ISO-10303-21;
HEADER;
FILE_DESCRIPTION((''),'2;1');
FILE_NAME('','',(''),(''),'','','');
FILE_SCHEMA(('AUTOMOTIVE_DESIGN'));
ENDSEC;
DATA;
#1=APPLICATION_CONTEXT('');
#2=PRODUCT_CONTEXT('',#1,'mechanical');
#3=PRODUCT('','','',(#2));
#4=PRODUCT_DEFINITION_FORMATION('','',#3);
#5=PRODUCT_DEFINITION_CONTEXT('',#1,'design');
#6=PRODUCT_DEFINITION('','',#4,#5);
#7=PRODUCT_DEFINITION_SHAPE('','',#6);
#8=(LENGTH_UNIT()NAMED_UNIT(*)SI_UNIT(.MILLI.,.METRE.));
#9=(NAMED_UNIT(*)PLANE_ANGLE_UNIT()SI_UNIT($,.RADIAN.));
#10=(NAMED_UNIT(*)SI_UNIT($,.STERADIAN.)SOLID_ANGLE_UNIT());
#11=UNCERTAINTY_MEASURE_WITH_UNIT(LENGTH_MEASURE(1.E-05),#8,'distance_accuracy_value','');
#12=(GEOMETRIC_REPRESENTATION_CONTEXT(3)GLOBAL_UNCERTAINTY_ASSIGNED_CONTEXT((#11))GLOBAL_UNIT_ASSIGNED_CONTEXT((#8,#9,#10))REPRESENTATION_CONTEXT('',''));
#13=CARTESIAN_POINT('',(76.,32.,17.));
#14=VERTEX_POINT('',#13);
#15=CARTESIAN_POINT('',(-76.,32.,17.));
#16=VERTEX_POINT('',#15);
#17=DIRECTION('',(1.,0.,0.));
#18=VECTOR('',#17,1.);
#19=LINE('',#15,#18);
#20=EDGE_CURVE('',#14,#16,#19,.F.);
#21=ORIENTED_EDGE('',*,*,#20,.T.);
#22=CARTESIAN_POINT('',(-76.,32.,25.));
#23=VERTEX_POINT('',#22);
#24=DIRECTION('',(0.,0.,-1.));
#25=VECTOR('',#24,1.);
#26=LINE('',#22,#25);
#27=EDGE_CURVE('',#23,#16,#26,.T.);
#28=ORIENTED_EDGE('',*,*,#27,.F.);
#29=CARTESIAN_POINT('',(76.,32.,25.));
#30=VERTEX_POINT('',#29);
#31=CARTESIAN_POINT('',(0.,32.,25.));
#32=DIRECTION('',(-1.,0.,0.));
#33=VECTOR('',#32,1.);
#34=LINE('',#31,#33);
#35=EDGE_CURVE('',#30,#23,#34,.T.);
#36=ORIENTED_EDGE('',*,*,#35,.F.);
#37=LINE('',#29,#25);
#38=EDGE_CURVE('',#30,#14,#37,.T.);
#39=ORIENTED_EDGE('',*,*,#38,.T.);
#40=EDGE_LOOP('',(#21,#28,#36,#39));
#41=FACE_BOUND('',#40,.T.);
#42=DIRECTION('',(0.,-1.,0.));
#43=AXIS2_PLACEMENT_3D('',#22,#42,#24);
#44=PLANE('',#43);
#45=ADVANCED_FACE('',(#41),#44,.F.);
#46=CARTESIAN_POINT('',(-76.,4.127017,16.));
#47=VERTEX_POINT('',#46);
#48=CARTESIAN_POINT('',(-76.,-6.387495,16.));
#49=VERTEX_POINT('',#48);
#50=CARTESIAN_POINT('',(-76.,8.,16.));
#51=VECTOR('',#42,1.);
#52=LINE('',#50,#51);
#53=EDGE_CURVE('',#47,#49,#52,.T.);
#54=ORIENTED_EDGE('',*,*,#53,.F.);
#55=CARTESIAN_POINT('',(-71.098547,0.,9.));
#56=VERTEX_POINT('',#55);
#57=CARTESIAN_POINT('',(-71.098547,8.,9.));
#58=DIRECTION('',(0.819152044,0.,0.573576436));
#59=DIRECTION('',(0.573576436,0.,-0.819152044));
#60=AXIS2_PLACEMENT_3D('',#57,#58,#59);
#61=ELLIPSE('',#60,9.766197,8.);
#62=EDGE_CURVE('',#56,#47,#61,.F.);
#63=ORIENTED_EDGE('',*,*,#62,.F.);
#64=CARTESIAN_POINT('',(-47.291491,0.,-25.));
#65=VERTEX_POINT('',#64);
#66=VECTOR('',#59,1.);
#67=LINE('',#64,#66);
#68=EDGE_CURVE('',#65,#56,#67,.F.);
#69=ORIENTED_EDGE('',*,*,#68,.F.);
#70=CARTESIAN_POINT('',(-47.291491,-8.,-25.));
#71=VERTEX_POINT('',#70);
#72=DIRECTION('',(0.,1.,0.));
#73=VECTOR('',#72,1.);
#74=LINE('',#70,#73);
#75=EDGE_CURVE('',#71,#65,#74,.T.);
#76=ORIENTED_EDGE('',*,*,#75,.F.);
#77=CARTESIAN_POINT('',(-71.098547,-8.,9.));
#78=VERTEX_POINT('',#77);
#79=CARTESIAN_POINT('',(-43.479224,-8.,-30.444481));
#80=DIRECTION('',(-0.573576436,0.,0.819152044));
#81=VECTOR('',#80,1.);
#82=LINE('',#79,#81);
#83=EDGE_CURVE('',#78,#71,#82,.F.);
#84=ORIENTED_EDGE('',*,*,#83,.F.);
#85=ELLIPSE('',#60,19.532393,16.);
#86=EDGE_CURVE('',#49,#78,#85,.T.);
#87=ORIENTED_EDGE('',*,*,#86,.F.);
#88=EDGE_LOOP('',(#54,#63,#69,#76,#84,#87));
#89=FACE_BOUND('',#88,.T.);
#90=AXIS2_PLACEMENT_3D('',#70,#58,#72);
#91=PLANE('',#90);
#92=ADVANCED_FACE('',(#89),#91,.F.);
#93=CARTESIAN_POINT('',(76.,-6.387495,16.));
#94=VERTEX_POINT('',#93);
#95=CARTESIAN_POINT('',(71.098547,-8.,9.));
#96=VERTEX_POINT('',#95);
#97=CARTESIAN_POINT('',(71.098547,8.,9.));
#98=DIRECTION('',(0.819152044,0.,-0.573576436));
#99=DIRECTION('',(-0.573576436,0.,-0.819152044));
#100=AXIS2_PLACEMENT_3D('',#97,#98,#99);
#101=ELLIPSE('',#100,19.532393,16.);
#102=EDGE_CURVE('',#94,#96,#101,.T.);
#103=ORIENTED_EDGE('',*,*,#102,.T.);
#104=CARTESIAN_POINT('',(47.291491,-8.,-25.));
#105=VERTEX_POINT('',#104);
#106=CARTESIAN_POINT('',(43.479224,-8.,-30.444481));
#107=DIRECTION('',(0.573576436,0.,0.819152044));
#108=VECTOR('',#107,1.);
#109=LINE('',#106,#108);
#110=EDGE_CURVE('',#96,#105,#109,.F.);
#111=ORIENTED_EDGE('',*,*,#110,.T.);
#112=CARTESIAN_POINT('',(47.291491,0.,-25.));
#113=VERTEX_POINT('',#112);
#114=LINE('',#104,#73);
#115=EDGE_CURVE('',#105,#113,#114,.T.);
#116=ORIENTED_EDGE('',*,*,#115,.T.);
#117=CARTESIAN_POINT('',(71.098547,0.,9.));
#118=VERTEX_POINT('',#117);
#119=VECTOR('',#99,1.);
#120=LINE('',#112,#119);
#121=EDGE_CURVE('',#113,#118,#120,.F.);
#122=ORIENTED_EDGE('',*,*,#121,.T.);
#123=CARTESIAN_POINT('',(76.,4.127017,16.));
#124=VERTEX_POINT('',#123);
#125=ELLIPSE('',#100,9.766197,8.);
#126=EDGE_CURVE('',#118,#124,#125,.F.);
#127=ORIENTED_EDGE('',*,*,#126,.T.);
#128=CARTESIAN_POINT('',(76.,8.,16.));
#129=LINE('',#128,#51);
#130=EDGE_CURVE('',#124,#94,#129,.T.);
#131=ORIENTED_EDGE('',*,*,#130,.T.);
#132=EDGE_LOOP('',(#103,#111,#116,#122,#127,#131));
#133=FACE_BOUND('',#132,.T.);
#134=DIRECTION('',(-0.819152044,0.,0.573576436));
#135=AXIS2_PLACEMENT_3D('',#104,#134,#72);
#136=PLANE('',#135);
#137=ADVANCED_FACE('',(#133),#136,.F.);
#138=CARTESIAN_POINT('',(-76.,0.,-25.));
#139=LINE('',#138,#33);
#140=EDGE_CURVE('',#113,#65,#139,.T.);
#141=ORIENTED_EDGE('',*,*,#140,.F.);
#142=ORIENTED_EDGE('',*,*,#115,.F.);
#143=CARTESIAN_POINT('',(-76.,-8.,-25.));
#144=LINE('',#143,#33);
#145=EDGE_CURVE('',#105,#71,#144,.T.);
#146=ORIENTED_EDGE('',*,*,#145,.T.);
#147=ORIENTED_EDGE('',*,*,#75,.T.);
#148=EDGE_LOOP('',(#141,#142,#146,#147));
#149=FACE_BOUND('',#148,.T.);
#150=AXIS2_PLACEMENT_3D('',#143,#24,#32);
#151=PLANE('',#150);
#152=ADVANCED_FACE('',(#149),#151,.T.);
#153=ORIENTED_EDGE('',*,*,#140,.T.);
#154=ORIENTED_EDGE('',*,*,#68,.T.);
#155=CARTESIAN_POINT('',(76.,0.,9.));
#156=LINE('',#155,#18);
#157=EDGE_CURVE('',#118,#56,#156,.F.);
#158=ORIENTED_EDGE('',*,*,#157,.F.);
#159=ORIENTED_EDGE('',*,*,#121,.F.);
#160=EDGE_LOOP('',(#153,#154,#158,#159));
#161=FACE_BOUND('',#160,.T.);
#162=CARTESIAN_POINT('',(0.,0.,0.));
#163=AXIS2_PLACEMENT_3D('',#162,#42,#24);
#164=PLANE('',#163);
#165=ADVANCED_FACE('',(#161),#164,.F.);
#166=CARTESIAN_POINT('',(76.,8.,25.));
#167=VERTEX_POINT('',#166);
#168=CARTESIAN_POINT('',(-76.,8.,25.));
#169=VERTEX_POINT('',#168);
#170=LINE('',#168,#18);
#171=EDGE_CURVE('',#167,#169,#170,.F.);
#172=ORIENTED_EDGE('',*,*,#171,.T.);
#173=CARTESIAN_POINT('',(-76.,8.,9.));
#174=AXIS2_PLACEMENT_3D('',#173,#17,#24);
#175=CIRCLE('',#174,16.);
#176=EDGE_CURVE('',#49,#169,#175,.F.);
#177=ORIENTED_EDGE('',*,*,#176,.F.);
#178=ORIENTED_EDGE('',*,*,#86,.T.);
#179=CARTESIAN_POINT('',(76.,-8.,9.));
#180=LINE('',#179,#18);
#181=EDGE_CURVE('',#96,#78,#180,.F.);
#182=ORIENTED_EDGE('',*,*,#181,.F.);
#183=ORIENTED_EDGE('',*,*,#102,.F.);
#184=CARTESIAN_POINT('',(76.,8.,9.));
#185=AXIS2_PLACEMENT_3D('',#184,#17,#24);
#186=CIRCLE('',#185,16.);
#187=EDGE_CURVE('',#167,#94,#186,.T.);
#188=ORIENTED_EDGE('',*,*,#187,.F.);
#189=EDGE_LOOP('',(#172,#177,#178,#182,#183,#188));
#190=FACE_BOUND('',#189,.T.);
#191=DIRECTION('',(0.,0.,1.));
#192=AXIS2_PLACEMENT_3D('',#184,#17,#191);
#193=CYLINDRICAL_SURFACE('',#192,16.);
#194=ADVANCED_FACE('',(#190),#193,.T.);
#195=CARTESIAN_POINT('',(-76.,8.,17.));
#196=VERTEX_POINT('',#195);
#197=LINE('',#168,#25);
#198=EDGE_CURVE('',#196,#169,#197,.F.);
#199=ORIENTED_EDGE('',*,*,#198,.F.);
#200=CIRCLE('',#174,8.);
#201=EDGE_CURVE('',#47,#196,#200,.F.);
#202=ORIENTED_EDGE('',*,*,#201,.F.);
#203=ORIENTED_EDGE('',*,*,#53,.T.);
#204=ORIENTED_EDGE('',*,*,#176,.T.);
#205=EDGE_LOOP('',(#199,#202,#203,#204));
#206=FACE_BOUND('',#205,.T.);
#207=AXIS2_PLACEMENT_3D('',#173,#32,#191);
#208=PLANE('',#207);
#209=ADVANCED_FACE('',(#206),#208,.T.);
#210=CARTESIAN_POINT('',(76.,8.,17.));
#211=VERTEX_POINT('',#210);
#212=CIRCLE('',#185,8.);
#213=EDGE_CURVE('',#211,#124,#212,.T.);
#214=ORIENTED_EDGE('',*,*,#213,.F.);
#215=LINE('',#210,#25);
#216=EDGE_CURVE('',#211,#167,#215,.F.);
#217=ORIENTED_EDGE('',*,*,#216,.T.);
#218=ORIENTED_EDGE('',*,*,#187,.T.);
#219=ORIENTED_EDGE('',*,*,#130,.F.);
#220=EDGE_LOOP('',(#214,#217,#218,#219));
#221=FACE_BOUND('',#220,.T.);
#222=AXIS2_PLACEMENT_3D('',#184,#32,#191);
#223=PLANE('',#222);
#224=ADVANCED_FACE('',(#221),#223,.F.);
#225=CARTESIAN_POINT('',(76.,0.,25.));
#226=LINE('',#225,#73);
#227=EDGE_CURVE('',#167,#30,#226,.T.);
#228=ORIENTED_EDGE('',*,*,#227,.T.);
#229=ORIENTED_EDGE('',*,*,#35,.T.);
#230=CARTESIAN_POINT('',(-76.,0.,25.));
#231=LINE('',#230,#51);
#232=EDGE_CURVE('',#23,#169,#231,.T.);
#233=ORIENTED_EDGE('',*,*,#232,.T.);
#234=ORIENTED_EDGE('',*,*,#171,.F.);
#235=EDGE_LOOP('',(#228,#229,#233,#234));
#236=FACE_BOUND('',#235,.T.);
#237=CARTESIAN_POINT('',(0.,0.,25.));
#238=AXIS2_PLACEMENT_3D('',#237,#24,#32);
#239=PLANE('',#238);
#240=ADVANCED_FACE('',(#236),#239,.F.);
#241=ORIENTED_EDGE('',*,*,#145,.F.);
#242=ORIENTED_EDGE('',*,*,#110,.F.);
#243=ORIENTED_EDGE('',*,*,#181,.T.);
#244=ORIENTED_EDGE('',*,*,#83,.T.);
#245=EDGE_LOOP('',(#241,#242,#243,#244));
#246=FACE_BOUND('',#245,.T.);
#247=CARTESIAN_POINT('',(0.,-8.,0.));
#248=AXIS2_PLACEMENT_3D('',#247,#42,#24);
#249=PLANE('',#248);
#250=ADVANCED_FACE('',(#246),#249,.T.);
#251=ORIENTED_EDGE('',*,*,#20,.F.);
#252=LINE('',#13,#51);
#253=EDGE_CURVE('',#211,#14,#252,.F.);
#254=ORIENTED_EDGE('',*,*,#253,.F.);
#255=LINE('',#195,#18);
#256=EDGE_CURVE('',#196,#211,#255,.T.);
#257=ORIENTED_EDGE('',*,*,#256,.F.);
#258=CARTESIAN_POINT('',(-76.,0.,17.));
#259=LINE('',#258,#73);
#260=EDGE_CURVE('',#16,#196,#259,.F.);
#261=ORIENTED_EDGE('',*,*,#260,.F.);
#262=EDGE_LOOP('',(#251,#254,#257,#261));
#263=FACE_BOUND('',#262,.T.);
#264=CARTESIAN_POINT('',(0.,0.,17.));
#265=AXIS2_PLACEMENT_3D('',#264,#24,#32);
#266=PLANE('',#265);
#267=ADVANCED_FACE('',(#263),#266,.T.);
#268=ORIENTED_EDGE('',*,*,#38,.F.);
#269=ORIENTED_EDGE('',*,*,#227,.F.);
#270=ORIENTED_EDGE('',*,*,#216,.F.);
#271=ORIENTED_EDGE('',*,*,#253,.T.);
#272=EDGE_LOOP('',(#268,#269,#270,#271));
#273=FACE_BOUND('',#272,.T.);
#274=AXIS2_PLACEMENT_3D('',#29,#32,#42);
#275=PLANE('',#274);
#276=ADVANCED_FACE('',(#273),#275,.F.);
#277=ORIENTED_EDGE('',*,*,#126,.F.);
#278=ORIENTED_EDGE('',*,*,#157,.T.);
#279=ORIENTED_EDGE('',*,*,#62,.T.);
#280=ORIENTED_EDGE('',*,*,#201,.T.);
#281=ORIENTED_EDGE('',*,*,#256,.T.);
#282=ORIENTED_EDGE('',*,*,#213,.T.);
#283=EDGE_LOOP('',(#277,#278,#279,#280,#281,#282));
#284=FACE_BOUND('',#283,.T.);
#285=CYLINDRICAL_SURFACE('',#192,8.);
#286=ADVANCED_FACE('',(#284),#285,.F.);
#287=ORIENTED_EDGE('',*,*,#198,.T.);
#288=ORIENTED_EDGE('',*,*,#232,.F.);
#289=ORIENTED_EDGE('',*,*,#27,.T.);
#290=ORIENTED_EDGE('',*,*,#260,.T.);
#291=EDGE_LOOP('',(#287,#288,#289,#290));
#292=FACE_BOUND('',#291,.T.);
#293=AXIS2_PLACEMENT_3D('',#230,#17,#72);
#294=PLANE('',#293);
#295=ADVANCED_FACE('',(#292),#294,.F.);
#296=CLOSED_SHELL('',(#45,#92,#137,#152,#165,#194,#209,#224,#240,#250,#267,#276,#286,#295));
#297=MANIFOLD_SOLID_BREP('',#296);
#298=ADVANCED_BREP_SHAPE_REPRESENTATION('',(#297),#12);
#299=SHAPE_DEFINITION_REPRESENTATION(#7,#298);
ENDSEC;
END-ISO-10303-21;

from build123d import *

# Parameters (mm, degrees)
SKETCH1_W                    = 152
SKETCH1_H                    = 50
BASE_FLANGE1_DEPTH           = 8
EDGE_FLANGE1_STRIP_W         = 48
EDGE_FLANGE1_STRIP_H         = 8
EDGE_FLANGE1_STRIP_CUT_DEPTH = 152
EDGE_FLANGE1_DEPTH           = 152
CHAMFER1_SIZE                = 41
CHAMFER1_SIZE2               = 28.708509067
MIRROR3_START                = 53.078332384
MIRROR3_OUTLINE_W            = 53
MIRROR3_OUTLINE_H            = 14
MIRROR3_DEPTH                = 23.516633891


# Read off the part's stored shape, not the designer's step: Mirror3
# Sheet-metal steps are written as plain solids
with BuildPart() as part:
    # Sketch1 → Base-Flange1 (new body)
    with BuildSketch(Plane(origin=(0, 0, 0), x_dir=(1, 0, 0), z_dir=(0, 1, 0))):
        Rectangle(SKETCH1_W, SKETCH1_H)
    extrude(amount=-BASE_FLANGE1_DEPTH)

    # Edge-Flange1 strip (across the edge) → Edge-Flange1 strip cut (cut)
    with BuildSketch(Plane(origin=(-76, 0, 25), x_dir=(0, 0, -1), z_dir=(1, 0, 0))):
        with Locations((-8, -4)):
            Rectangle(EDGE_FLANGE1_STRIP_W, EDGE_FLANGE1_STRIP_H)
    extrude(amount=EDGE_FLANGE1_STRIP_CUT_DEPTH, mode=Mode.SUBTRACT)

    # Edge-Flange1 section (across the edge) → Edge-Flange1 (add)
    with BuildSketch(Plane(origin=(-76, 0, 25), x_dir=(0, 0, -1), z_dir=(1, 0, 0))):
        with BuildLine():
            Line((0, 8), (0, 32))
            Line((0, 32), (8, 32))
            Line((8, 32), (8, 8))
            ThreePointArc((8, 8), (10.343145751, 2.343145751), (16, 0))
            Line((16, 0), (16, -8))
            ThreePointArc((16, -8), (4.686291501, -3.313708499), (0, 8))
        make_face()
    extrude(amount=EDGE_FLANGE1_DEPTH)

    # Chamfer1
    chamfer1_edges = [part.edges().sort_by_distance(p)[0] for p in [
        (-76, -4, -25),
    ]]
    chamfer1_side = [part.faces().sort_by_distance(p)[0] for p in [
        (-76, -0.640312424, -8),
    ]]
    chamfer(chamfer1_edges, length=CHAMFER1_SIZE, length2=CHAMFER1_SIZE2, reference=chamfer1_side[0])

    # Mirror3 outline → Mirror3 (cut)
    with BuildSketch(Plane(origin=(0, 0, 0), x_dir=(0.5735764363510512, 0, 0.8191520442889882), z_dir=(0.8191520442889882, 0, -0.5735764363510512)).offset(MIRROR3_START)):
        with Locations((31.5, 1)):
            Rectangle(MIRROR3_OUTLINE_W, MIRROR3_OUTLINE_H)
    extrude(amount=MIRROR3_DEPTH, mode=Mode.SUBTRACT)


solid = part.part
